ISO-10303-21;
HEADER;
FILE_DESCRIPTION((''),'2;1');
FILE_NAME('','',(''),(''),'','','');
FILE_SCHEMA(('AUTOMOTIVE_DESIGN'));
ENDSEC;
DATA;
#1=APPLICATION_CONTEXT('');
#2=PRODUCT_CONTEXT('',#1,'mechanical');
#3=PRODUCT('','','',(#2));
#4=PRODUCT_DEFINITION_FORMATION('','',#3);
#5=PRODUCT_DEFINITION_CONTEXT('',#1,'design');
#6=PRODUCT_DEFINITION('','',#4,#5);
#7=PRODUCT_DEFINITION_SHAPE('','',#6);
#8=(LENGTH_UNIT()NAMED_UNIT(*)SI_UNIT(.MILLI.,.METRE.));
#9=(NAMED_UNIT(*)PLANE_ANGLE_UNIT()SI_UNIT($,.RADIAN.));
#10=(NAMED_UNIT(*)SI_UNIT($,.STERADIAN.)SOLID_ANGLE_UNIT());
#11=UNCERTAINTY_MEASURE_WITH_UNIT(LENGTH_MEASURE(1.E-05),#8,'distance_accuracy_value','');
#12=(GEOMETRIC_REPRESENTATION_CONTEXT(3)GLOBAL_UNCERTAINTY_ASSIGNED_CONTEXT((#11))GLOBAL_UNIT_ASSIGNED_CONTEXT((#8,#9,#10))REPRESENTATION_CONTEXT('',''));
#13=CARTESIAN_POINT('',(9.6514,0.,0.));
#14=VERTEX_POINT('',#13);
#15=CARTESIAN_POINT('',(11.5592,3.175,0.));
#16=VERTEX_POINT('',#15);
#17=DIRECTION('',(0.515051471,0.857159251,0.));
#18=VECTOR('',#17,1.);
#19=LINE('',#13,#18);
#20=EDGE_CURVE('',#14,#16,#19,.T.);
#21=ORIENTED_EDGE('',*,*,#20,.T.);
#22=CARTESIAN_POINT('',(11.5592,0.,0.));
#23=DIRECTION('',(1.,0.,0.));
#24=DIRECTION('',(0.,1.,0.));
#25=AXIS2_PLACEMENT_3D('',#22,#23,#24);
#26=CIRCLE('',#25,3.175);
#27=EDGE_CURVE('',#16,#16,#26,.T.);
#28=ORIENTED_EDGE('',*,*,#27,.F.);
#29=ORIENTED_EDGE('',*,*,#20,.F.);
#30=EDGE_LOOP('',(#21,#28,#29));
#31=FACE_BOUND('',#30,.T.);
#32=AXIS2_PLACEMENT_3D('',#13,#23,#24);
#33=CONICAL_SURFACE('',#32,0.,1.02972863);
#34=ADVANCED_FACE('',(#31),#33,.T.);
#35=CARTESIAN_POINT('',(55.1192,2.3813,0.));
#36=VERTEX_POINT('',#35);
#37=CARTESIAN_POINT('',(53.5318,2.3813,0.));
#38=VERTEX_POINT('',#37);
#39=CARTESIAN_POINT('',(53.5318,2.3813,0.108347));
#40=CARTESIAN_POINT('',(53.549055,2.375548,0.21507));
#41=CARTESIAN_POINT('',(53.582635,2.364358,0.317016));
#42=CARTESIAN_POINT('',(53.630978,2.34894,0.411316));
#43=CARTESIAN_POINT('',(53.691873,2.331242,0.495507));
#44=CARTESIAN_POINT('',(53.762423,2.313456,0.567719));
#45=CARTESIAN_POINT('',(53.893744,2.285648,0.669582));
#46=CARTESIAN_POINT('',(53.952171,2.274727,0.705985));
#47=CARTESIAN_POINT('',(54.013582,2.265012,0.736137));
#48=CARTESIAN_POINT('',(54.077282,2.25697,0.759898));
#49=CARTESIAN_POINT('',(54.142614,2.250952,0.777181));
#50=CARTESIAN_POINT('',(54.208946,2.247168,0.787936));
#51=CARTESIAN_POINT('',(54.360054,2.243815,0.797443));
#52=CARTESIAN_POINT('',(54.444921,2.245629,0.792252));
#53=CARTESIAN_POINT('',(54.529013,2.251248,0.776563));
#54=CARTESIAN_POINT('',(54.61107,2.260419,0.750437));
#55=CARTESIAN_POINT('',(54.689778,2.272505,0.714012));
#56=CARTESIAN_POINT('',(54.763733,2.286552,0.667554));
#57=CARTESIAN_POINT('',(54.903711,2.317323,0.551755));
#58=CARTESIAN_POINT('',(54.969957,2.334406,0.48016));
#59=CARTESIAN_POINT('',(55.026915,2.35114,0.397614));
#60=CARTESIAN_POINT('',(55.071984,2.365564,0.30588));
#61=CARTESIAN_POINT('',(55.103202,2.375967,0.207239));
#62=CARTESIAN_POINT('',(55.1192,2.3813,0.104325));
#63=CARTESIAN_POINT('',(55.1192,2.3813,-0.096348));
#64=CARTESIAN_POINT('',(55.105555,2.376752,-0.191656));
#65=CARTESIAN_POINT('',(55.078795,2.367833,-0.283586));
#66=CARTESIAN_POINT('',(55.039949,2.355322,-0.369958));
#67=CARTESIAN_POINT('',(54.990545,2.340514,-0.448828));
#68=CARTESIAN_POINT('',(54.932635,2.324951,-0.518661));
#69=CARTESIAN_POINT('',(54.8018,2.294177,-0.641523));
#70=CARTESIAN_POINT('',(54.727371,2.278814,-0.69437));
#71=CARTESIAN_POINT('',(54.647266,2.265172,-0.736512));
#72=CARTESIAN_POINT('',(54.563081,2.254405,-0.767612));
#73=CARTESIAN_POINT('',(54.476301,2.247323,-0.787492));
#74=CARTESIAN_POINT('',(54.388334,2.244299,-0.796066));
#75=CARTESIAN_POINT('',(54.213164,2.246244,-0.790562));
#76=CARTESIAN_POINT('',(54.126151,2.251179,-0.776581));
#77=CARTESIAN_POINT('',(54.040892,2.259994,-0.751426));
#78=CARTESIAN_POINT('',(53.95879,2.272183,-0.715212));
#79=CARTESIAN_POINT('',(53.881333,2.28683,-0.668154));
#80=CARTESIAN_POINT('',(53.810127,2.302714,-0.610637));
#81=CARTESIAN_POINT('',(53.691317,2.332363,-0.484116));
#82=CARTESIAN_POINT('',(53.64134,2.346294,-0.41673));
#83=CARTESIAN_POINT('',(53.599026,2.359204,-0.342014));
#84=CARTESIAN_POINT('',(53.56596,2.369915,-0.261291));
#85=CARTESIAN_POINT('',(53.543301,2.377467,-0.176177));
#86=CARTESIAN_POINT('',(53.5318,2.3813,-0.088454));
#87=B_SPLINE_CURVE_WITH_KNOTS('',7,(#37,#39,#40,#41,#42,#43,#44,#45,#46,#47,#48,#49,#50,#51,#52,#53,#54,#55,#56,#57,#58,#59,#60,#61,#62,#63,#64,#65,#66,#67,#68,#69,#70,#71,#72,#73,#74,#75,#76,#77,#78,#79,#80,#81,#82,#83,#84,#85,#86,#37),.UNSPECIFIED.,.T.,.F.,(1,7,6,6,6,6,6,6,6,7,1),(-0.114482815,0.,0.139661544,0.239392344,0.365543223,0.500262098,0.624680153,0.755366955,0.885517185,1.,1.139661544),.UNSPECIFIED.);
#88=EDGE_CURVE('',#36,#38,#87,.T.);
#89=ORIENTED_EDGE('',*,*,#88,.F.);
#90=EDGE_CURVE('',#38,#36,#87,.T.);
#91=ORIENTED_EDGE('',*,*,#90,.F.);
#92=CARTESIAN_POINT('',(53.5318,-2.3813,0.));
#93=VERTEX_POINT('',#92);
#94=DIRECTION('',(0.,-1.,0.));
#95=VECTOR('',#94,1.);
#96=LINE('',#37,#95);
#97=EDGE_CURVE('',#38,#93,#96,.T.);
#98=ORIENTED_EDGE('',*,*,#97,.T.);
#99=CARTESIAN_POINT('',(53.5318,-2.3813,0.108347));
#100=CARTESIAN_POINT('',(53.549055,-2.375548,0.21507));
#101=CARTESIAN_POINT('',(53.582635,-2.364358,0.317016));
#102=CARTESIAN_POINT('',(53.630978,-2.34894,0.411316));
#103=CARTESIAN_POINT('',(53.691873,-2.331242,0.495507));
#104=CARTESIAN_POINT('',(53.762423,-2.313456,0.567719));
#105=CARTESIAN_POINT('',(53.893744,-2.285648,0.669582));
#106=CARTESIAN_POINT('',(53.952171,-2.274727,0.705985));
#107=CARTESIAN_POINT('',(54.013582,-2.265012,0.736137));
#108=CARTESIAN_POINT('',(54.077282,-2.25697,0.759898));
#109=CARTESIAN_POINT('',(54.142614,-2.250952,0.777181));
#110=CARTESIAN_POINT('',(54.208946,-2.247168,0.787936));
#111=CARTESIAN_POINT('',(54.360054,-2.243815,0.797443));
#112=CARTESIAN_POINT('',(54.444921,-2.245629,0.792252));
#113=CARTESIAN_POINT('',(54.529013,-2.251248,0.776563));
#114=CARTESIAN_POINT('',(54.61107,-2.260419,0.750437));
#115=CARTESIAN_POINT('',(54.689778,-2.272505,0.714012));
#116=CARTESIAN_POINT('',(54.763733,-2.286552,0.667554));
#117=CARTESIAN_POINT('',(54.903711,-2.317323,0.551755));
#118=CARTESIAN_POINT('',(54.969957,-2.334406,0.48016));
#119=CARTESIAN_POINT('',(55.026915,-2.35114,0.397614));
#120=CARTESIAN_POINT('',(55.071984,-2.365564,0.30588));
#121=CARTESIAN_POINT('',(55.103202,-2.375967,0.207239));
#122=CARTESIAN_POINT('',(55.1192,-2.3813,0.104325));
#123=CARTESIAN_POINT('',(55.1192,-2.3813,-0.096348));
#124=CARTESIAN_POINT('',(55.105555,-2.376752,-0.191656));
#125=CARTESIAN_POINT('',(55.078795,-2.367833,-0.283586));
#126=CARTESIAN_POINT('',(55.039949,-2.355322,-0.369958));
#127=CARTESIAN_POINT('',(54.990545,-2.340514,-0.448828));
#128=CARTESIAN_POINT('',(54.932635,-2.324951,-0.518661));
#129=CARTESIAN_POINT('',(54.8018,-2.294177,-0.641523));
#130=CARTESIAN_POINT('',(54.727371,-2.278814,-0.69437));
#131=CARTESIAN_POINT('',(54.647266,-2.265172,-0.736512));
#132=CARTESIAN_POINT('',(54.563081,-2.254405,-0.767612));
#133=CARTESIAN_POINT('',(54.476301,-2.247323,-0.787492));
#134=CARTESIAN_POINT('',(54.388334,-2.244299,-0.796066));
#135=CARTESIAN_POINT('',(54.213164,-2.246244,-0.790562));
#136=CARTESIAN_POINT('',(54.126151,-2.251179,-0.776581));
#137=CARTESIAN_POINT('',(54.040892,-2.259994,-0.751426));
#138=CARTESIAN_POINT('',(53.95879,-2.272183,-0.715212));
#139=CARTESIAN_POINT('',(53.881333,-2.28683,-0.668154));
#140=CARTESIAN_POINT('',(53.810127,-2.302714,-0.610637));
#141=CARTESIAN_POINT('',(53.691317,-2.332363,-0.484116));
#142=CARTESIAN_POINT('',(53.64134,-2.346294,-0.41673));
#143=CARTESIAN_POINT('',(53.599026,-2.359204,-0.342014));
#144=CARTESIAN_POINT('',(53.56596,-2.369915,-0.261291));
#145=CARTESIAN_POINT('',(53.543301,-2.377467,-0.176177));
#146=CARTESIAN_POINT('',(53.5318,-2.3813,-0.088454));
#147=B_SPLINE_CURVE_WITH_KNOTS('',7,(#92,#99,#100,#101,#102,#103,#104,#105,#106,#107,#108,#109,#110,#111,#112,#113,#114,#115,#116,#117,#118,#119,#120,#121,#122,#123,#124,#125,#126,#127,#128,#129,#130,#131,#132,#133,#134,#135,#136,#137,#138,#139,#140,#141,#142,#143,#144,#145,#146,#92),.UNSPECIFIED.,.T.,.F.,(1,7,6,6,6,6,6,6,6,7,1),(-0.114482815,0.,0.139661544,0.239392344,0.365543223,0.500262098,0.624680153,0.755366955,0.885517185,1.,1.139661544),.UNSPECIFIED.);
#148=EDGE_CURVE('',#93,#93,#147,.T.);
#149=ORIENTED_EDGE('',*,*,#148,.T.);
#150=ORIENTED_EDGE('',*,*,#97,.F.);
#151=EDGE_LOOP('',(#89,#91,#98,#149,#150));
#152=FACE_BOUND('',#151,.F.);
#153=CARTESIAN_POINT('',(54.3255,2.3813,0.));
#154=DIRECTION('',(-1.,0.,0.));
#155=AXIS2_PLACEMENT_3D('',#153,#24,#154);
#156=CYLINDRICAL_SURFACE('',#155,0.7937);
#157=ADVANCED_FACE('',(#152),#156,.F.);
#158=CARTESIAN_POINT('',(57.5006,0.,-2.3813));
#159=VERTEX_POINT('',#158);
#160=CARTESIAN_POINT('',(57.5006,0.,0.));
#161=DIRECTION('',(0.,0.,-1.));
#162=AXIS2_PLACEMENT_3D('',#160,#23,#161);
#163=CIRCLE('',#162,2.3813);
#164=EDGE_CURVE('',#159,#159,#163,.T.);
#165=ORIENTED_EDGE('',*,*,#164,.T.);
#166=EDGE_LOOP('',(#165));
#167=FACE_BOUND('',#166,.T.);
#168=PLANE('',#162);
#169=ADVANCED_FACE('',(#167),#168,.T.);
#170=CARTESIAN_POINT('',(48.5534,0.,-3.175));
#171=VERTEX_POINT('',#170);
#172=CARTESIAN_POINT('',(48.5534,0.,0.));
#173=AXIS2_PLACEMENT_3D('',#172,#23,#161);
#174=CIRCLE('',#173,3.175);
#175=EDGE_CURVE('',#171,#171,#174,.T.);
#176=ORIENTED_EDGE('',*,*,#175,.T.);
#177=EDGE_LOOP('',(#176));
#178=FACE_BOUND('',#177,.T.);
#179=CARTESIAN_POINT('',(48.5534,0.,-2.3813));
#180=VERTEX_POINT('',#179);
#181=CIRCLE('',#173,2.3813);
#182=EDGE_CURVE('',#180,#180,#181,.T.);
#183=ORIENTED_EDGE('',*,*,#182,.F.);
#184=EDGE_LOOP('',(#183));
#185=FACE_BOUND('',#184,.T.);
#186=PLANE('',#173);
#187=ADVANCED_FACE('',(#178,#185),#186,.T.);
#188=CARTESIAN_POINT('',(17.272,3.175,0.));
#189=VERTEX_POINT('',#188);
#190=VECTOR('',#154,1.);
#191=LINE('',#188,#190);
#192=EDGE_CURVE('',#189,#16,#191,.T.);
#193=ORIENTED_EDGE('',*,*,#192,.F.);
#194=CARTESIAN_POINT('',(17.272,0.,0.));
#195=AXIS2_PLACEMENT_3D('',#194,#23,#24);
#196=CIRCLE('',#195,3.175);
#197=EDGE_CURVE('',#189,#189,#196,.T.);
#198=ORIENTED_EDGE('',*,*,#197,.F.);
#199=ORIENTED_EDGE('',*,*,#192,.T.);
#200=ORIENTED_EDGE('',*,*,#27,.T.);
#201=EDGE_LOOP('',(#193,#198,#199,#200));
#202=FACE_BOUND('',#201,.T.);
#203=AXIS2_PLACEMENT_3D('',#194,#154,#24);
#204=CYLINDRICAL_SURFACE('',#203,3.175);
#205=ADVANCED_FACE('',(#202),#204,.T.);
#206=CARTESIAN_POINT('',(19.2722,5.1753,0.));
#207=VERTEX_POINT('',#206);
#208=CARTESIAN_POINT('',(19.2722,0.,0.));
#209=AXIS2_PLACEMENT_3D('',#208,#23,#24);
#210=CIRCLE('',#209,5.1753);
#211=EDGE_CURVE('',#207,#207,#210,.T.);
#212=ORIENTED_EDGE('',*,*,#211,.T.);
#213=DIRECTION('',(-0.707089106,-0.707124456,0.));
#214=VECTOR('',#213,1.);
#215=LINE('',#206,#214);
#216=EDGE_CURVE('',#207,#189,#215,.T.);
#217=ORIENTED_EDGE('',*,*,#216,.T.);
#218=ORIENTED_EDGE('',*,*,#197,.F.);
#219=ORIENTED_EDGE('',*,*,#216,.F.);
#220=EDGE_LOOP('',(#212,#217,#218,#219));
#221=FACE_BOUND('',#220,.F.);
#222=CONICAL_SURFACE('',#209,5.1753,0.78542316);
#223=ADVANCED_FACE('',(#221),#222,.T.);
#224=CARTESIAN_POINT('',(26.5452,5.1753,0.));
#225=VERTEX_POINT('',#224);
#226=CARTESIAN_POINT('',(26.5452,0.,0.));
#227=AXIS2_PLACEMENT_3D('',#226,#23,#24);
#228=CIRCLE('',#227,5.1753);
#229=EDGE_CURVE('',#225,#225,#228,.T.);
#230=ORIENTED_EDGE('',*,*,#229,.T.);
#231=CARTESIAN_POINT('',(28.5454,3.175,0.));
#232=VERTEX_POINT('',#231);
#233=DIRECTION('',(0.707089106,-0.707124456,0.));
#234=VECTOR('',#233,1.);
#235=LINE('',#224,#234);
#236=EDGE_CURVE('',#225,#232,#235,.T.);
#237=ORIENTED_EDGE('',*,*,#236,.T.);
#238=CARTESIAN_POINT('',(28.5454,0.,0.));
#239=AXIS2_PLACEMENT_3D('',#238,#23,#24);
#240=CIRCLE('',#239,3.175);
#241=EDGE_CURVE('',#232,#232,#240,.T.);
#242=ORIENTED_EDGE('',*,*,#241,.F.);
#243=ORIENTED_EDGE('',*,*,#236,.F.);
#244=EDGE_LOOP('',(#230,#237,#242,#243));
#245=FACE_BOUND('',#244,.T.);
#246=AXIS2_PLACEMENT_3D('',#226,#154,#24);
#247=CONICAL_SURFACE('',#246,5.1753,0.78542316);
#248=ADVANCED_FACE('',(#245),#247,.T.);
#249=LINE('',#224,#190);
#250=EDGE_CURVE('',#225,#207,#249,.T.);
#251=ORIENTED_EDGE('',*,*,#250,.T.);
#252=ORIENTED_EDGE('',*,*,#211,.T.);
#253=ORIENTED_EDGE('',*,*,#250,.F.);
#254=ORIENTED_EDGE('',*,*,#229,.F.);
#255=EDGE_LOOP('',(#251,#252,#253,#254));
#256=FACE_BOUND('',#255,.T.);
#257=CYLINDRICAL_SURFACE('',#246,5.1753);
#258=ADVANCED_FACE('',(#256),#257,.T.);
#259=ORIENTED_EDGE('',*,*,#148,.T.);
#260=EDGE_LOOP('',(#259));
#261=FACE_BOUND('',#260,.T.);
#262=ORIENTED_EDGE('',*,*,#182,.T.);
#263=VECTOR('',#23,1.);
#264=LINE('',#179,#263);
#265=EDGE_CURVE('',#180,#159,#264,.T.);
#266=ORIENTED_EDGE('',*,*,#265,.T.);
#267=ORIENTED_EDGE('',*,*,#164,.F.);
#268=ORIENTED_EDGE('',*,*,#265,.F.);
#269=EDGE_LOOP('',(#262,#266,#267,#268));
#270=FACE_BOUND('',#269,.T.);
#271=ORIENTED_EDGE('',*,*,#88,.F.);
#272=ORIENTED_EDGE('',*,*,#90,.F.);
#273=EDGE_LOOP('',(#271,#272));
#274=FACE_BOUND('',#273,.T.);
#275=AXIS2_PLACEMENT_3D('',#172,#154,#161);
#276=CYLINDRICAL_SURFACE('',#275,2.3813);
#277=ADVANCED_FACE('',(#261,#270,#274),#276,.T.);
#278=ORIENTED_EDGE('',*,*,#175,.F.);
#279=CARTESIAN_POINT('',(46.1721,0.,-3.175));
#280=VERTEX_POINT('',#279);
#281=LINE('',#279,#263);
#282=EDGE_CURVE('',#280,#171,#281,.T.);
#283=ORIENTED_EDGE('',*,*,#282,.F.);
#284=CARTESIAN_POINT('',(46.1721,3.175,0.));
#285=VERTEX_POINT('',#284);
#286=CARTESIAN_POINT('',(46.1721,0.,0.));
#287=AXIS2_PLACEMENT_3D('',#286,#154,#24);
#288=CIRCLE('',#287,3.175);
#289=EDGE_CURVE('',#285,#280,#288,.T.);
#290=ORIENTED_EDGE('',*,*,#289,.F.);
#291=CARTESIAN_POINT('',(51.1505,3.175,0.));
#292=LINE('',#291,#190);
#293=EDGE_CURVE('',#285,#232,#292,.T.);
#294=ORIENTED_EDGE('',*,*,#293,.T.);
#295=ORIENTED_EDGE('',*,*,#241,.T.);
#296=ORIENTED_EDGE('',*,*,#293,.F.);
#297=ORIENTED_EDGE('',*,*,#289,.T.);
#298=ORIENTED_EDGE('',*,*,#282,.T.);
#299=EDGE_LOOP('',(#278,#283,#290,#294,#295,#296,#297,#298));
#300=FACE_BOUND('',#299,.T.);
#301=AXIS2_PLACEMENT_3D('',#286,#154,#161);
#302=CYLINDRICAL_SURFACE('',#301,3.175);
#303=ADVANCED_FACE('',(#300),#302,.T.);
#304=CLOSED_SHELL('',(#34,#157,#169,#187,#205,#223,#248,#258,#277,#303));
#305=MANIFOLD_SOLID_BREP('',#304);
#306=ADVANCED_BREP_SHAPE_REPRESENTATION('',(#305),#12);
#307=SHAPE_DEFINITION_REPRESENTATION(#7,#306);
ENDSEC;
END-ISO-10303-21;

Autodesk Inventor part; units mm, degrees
ref_plane "YZ Plane" through (0, 0, 0) normal (1, 0, 0) x (0, 1, 0)
ref_plane "XY Plane" through (0, 0, 0) normal (0, 0, 1) x (1, 0, 0)
sketch "Sketch1" plane through (0, 0, 0) normal (0, 0, 1) x (1, 0, 0)
  line L0 (51.1505, 3.175) -> (28.5454, 3.175)
  line L1 (19.2722, 5.1753) -> (17.272, 3.175)
  line L2 (26.5452, 5.1753) -> (28.5454, 3.175)
  line L3 (9.6514, 0) -> (11.5592, 3.175)
  line L4 (17.272, 3.175) -> (11.5592, 3.175)
  line L5 (26.5452, 5.1753) -> (19.2722, 5.1753)
  line L6 (9.6514, 0) -> (51.1505, 0)
  line L7 (51.1505, 3.175) -> (51.1505, 0)
  point P0 (0, 0)
  dimension "d3" = 135
  dimension "d4" = 7.2729
  dimension "d5" = 5.7128
  dimension "d8" = 59
  dimension "d9" = 135
  dimension "d10" = 41.4991
  dimension "d11" = 3.175
  dimension "d12" = 5.1753
  dimension "d13" = 3.175
  dimension "d14" = 9.6514
revolve "Revolution1" add sketch "Sketch1" angle 360 about axis through (9.6514, 0, 0) along (1, 0, 0)
sketch "Sketch2" plane through (51.1505, 0, 0) normal (1, 0, 0) x (0, 0, -1)
  circle A0 centre (0, 0) radius 3.175 projected
extrude "Extrusion1" cut sketch "Sketch2" against normal blind 4.9784
sketch "Sketch5" plane through (46.1721, 0, 0) normal (1, 0, 0) x (0, 0, -1)
  circle A0 centre (0, 0) radius 3.175 projected
extrude "Extrusion4" add sketch "Sketch5" along normal blind 2.3813
sketch "Sketch6" plane through (48.5534, 0, 0) normal (1, 0, 0) x (0, 0, -1)
  circle A0 centre (0, 0) radius 3.175 projected
  circle A1 centre (0, 0) radius 2.3813
  dimension "d30" = 4.7625
extrude "Extrusion5" add sketch "Sketch6" along normal blind 8.9472 contours A1
ref_plane "Work Plane1" through (48.5534, 2.3813, 0) normal (0, 1, 0) x (-1, 0, 0)
sketch "Sketch7" plane through (48.5534, 2.3813, 0) normal (0, 1, 0) x (-1, 0, 0)
  line L0 (-8.9471, 2.3813) -> (-8.9471, -2.3813) projected
  line L1 (0, -2.3813) -> (0, 2.3813) projected
  line L2 (-8.9471, 0) -> (0, 0) construction
  circle A0 centre (-5.7721, 0) radius 0.7937
  point P0 (48.5534, 0)
  dimension "d34" = 1.5875
  dimension "d36" = 5.7721
extrude "Extrusion6" cut sketch "Sketch7" against normal through all
properties part number "Ball Shifting Shaft" material "Steel"
